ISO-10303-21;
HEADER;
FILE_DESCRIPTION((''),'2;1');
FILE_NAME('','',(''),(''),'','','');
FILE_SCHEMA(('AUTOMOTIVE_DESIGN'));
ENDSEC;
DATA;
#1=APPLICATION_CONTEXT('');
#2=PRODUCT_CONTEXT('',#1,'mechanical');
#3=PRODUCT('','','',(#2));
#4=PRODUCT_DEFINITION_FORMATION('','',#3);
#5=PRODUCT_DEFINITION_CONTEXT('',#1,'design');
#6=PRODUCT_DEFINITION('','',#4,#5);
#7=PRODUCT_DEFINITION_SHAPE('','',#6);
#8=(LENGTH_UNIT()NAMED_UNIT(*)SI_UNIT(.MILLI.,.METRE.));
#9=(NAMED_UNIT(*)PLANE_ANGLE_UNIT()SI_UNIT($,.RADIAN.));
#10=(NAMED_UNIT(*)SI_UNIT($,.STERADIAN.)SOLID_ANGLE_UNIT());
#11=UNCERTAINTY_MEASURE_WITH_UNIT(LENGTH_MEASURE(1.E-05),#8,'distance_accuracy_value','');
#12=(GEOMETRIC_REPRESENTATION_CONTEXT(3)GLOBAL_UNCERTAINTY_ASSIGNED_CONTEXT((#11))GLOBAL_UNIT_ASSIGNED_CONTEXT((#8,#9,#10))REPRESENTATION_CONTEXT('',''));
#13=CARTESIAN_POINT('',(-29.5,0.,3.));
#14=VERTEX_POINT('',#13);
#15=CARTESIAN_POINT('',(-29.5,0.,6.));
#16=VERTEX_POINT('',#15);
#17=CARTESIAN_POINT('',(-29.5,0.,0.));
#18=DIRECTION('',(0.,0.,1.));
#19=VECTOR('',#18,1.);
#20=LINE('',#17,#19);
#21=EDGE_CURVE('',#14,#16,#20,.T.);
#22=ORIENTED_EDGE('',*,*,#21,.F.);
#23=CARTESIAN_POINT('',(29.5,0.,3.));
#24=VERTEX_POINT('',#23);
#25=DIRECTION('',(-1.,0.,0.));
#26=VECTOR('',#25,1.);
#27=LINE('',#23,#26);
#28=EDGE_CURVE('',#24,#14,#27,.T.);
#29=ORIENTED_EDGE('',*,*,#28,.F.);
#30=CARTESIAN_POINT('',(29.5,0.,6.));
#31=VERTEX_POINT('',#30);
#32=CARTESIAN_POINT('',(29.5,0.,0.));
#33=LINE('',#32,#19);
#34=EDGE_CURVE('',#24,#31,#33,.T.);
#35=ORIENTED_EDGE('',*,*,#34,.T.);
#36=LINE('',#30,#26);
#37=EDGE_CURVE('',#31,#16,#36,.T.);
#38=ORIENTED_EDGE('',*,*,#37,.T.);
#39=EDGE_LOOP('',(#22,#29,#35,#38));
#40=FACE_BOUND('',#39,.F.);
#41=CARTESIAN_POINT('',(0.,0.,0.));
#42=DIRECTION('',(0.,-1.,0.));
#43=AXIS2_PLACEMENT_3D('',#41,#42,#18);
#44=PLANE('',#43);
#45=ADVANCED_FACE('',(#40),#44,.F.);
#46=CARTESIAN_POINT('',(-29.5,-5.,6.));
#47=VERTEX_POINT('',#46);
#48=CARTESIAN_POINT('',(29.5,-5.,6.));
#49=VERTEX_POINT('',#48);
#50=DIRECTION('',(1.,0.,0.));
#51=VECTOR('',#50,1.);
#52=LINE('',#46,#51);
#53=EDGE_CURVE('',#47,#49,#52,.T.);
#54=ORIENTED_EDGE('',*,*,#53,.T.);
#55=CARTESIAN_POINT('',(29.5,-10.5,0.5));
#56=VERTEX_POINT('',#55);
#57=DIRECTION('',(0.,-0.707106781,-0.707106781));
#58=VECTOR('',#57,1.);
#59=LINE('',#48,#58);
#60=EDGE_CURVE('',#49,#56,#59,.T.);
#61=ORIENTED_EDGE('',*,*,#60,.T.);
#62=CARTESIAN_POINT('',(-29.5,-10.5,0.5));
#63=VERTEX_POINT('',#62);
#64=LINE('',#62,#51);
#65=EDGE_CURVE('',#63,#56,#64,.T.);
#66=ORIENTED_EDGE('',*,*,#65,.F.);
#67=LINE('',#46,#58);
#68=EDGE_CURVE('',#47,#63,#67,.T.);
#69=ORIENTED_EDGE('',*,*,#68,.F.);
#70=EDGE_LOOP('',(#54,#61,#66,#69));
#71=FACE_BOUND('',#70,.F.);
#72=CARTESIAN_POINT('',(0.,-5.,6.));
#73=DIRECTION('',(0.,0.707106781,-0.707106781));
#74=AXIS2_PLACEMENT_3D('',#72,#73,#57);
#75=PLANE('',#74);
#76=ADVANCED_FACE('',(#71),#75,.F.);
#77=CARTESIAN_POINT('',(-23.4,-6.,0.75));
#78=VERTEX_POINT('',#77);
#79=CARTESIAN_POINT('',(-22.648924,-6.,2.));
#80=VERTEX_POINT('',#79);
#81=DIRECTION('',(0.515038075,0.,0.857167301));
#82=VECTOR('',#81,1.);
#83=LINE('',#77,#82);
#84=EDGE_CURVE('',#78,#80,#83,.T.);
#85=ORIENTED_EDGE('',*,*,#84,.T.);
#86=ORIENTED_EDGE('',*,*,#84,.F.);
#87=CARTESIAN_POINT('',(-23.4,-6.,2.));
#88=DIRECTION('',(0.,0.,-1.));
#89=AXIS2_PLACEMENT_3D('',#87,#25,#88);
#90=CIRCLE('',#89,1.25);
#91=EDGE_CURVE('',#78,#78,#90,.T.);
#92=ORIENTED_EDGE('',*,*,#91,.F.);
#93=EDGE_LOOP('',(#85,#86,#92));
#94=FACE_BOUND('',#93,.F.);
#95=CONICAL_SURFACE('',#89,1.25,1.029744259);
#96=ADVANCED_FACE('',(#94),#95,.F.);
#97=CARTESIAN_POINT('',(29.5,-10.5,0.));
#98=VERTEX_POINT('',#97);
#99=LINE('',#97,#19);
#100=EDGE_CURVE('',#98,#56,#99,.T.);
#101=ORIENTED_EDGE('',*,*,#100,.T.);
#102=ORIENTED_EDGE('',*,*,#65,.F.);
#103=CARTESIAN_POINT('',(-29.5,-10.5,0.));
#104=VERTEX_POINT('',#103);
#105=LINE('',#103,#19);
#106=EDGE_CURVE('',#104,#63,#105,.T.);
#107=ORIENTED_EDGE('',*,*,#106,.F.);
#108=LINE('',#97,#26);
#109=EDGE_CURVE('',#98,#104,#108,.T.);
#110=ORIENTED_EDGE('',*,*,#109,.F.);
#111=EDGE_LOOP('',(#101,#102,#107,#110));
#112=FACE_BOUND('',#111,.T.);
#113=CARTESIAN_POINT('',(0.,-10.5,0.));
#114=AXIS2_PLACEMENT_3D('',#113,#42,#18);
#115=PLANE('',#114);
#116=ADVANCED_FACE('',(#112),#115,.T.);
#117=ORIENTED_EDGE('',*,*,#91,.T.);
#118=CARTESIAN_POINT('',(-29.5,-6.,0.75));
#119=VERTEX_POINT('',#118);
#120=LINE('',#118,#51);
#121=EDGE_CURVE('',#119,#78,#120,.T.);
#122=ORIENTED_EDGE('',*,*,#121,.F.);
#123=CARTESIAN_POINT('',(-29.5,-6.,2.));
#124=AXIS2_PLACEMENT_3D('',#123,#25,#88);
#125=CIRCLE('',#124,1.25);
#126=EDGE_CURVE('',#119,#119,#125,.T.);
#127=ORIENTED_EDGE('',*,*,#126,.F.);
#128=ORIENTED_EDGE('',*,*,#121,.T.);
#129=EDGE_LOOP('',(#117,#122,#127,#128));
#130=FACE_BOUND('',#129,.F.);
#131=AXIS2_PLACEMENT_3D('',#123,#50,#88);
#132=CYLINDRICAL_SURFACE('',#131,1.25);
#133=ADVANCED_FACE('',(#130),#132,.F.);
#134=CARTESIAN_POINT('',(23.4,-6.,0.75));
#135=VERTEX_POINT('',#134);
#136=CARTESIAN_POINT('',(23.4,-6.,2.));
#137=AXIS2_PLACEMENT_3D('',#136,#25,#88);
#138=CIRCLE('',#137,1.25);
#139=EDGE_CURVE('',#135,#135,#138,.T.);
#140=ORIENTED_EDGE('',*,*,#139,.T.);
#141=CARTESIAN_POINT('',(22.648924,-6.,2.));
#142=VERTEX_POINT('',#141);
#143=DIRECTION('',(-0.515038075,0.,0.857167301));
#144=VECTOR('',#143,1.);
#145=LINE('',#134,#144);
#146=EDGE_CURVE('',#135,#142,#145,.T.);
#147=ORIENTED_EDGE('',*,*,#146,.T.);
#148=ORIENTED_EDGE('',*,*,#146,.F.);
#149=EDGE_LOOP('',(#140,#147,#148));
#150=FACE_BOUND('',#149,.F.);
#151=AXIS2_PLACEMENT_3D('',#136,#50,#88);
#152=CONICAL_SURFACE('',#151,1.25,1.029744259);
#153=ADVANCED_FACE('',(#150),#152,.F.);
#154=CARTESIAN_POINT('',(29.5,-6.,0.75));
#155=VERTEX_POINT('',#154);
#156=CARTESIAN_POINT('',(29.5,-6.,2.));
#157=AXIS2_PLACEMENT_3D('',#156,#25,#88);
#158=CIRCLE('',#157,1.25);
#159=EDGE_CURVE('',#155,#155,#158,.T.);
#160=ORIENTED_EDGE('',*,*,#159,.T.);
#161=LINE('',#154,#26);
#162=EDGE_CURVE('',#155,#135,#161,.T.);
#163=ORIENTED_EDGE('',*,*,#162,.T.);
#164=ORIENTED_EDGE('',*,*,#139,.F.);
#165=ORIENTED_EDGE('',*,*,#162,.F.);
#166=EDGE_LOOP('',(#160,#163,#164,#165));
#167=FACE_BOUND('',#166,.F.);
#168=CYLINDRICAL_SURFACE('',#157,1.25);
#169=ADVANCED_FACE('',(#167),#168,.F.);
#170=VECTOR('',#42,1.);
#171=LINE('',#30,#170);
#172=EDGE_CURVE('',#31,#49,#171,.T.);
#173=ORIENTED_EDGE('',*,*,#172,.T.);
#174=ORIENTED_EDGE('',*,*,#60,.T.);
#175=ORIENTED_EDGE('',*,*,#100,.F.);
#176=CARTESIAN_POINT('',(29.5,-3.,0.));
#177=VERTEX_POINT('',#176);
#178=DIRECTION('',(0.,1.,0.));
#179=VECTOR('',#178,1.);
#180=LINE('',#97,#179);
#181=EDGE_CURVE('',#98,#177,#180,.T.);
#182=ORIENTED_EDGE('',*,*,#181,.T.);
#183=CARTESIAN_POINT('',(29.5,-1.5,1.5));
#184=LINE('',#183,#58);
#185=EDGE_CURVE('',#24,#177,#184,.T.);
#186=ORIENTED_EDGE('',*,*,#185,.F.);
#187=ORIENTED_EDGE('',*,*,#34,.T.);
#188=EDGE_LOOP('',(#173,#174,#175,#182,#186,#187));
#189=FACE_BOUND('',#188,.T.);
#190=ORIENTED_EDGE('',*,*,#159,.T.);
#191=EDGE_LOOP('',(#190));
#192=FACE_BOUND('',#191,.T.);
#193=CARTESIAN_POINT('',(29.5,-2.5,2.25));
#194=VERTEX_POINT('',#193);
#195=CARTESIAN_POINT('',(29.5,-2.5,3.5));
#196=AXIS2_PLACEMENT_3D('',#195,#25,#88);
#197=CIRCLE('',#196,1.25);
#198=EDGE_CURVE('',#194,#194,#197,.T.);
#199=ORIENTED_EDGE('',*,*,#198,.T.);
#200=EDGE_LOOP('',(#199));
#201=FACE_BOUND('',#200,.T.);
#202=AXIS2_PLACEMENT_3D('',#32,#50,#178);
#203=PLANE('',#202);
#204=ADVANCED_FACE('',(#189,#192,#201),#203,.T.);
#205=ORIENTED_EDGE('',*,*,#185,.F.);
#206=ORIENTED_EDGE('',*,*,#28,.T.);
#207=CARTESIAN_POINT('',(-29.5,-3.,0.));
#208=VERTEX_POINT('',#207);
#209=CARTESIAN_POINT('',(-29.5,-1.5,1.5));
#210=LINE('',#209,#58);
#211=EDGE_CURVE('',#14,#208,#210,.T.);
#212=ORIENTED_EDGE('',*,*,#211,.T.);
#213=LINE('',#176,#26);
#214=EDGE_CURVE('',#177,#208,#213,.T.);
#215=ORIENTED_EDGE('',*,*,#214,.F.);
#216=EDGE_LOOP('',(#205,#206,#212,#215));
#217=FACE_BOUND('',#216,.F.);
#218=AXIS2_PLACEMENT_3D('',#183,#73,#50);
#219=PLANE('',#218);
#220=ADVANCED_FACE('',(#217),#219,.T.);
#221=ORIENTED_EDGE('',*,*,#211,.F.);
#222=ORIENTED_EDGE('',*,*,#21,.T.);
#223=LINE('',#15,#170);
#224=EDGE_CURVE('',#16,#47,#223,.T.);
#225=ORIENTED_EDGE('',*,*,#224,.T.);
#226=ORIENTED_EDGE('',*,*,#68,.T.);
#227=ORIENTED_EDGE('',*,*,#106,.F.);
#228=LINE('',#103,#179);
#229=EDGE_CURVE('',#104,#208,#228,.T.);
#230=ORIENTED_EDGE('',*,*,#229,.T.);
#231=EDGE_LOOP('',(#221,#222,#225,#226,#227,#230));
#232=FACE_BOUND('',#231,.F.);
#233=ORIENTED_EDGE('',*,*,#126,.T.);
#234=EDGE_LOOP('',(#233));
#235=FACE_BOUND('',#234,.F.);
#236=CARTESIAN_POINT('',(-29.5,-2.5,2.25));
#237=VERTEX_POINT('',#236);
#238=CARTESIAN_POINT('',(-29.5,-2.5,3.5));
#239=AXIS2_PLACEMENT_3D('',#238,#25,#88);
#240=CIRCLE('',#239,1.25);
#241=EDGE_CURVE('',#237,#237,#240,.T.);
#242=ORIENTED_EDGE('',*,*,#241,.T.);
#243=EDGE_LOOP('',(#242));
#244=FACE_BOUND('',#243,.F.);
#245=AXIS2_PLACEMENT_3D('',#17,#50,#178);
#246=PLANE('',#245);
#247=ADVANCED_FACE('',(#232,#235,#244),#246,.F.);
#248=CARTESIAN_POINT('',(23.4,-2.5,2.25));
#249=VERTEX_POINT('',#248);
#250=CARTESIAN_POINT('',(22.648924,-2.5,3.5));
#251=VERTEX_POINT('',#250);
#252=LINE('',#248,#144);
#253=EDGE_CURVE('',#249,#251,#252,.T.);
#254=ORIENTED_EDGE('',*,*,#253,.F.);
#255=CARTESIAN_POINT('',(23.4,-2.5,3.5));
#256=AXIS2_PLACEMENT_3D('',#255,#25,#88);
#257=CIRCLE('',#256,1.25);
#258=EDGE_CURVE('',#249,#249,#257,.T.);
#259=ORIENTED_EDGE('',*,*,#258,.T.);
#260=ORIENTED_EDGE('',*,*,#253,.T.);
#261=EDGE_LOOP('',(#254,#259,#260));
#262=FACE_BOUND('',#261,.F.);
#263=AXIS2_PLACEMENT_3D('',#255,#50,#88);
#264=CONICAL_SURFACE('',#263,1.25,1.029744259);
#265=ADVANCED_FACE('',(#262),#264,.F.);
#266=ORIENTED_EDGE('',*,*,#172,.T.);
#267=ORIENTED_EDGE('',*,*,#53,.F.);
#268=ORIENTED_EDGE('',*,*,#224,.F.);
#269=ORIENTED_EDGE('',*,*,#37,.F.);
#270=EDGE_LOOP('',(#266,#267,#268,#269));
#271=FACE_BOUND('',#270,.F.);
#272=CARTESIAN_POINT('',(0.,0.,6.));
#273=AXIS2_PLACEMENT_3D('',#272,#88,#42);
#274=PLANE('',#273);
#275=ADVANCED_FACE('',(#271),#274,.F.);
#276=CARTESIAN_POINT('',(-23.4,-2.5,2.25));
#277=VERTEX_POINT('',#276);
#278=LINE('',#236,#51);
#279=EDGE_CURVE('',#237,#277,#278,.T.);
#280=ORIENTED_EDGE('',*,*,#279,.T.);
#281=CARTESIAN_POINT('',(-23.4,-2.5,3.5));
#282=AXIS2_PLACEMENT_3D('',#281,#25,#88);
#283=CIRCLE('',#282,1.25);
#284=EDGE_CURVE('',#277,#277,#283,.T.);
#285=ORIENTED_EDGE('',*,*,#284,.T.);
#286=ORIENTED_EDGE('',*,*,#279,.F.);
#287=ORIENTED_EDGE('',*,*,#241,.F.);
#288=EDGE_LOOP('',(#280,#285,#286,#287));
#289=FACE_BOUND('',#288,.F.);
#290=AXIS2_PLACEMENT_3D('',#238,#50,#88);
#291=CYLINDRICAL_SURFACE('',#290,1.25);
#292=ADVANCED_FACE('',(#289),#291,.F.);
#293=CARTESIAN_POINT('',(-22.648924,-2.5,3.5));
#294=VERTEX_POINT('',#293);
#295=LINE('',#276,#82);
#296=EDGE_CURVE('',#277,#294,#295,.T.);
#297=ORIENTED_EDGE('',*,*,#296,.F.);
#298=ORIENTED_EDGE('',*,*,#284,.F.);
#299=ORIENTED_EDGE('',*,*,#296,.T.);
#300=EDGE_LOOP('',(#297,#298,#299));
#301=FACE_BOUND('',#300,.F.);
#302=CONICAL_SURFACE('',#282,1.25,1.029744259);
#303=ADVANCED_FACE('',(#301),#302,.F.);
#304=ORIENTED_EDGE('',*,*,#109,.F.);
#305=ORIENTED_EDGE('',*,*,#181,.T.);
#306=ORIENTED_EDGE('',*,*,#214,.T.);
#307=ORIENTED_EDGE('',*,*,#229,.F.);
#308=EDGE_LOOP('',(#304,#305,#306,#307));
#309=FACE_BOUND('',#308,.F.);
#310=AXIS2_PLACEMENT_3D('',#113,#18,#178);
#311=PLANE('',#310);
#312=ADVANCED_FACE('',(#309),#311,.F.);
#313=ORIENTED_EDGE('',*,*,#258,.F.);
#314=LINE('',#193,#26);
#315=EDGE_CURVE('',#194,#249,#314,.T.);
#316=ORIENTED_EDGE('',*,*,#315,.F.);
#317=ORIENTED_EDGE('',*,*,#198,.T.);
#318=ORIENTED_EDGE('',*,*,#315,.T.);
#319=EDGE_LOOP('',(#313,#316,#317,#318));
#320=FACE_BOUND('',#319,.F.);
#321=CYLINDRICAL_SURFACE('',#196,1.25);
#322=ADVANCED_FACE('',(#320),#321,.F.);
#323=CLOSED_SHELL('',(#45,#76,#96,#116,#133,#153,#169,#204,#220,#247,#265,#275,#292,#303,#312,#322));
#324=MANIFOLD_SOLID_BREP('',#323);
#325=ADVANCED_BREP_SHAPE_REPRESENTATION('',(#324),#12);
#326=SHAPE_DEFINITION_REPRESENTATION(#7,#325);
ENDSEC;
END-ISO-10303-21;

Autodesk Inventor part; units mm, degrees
ref_plane "YZ Plane" through (0, 0, 0) normal (1, 0, 0) x (0, 1, 0)
ref_plane "XZ Plane" through (0, 0, 0) normal (0, 1, 0) x (-1, 0, 0)
ref_plane "XY Plane" through (0, 0, 0) normal (0, 0, 1) x (1, 0, 0)
sketch "Skizze1" plane through (0, 0, 0) normal (1, 0, 0) x (0, 1, 0)
  line L0 (-5, 6) -> (-10.5, 0.5)
  line L1 (-10.5, 0) -> (0, 0)
  line L2 (0, 0) -> (0, 6)
  line L3 (0, 6) -> (-5, 6)
  line L4 (-10.5, 0) -> (-10.5, 0.5)
  dimension "d35" = 45
  dimension "d54" = 6
  dimension "d55" = 0.5
  dimension "d56" = 10.5
extrude "Extrusion1" add sketch "Skizze1" along normal mid plane 59
fillet "Rundung2" [suppressed]
sketch "Skizze5" plane through (29.5, 0, 0) normal (1, 0, 0) x (0, 0, -1)
  line L0 (-7.2, 0) -> (1.2, 0) projected
  line L1 (0, -12.6) -> (0, 2.1) projected
  point P0 (0, 0)
  point P1 (-3.7, -4)
  dimension "d36" = 3.7
  dimension "d37" = 4
hole "Bohrung3" [suppressed]
sketch "Skizze6" plane through (29.5, 0, 0) normal (1, 0, 0) x (0, 0, -1)
  line L0 (-7.2, 0) -> (1.2, 0) projected
  line L1 (0, -12.6) -> (0, 2.1) projected
  point P0 (0, 0)
  point P1 (-3.5, -2.5)
  point P2 (-2, -6)
  dimension "d45" = 3.5
  dimension "d46" = 2.5
  dimension "d65" = 1.5
  dimension "d66" = 3.5
hole "Bohrung4" at (29.5, -2.5, 3.5) at (29.5, -6, 2) direction (-1, 0, 0) diameter 2.5 depth 6.1 tip angle 118
mirror "Spiegeln1" about plane through (0, 0, 0) normal (1, 0, 0) of "Bohrung4"
sketch "Skizze7" plane through (-29.5, -5, 6) normal (0, 0, 1) x (1, 0, 0)
  line L0 (0, 0) -> (59, 0) projected
  line L1 (59, 5) -> (59, 0) projected
  line L2 (59, 5) -> (0, 5) projected
  line L3 (0, 0) -> (0, 5) projected
  line L4 (0, 0) -> (0, 5) construction
  line L5 (0, 2.5) -> (59, 2.5) construction
  line L6 (29.5, 5) -> (29.5, 0) construction
  line L7 (0, 0) -> (59, 0) construction
  point P0 (15.5, 2.5)
  point P1 (43.5, 2.5)
  point P2 (29.5, 2.5)
  dimension "d57" = 14
hole "Bohrung5" [suppressed]
chamfer "Fase2" distance 3 angle 45 1 edges at (0, 0, 0)
properties part number "Chip Schaufel Mitte" material "Aluminium 6061"
